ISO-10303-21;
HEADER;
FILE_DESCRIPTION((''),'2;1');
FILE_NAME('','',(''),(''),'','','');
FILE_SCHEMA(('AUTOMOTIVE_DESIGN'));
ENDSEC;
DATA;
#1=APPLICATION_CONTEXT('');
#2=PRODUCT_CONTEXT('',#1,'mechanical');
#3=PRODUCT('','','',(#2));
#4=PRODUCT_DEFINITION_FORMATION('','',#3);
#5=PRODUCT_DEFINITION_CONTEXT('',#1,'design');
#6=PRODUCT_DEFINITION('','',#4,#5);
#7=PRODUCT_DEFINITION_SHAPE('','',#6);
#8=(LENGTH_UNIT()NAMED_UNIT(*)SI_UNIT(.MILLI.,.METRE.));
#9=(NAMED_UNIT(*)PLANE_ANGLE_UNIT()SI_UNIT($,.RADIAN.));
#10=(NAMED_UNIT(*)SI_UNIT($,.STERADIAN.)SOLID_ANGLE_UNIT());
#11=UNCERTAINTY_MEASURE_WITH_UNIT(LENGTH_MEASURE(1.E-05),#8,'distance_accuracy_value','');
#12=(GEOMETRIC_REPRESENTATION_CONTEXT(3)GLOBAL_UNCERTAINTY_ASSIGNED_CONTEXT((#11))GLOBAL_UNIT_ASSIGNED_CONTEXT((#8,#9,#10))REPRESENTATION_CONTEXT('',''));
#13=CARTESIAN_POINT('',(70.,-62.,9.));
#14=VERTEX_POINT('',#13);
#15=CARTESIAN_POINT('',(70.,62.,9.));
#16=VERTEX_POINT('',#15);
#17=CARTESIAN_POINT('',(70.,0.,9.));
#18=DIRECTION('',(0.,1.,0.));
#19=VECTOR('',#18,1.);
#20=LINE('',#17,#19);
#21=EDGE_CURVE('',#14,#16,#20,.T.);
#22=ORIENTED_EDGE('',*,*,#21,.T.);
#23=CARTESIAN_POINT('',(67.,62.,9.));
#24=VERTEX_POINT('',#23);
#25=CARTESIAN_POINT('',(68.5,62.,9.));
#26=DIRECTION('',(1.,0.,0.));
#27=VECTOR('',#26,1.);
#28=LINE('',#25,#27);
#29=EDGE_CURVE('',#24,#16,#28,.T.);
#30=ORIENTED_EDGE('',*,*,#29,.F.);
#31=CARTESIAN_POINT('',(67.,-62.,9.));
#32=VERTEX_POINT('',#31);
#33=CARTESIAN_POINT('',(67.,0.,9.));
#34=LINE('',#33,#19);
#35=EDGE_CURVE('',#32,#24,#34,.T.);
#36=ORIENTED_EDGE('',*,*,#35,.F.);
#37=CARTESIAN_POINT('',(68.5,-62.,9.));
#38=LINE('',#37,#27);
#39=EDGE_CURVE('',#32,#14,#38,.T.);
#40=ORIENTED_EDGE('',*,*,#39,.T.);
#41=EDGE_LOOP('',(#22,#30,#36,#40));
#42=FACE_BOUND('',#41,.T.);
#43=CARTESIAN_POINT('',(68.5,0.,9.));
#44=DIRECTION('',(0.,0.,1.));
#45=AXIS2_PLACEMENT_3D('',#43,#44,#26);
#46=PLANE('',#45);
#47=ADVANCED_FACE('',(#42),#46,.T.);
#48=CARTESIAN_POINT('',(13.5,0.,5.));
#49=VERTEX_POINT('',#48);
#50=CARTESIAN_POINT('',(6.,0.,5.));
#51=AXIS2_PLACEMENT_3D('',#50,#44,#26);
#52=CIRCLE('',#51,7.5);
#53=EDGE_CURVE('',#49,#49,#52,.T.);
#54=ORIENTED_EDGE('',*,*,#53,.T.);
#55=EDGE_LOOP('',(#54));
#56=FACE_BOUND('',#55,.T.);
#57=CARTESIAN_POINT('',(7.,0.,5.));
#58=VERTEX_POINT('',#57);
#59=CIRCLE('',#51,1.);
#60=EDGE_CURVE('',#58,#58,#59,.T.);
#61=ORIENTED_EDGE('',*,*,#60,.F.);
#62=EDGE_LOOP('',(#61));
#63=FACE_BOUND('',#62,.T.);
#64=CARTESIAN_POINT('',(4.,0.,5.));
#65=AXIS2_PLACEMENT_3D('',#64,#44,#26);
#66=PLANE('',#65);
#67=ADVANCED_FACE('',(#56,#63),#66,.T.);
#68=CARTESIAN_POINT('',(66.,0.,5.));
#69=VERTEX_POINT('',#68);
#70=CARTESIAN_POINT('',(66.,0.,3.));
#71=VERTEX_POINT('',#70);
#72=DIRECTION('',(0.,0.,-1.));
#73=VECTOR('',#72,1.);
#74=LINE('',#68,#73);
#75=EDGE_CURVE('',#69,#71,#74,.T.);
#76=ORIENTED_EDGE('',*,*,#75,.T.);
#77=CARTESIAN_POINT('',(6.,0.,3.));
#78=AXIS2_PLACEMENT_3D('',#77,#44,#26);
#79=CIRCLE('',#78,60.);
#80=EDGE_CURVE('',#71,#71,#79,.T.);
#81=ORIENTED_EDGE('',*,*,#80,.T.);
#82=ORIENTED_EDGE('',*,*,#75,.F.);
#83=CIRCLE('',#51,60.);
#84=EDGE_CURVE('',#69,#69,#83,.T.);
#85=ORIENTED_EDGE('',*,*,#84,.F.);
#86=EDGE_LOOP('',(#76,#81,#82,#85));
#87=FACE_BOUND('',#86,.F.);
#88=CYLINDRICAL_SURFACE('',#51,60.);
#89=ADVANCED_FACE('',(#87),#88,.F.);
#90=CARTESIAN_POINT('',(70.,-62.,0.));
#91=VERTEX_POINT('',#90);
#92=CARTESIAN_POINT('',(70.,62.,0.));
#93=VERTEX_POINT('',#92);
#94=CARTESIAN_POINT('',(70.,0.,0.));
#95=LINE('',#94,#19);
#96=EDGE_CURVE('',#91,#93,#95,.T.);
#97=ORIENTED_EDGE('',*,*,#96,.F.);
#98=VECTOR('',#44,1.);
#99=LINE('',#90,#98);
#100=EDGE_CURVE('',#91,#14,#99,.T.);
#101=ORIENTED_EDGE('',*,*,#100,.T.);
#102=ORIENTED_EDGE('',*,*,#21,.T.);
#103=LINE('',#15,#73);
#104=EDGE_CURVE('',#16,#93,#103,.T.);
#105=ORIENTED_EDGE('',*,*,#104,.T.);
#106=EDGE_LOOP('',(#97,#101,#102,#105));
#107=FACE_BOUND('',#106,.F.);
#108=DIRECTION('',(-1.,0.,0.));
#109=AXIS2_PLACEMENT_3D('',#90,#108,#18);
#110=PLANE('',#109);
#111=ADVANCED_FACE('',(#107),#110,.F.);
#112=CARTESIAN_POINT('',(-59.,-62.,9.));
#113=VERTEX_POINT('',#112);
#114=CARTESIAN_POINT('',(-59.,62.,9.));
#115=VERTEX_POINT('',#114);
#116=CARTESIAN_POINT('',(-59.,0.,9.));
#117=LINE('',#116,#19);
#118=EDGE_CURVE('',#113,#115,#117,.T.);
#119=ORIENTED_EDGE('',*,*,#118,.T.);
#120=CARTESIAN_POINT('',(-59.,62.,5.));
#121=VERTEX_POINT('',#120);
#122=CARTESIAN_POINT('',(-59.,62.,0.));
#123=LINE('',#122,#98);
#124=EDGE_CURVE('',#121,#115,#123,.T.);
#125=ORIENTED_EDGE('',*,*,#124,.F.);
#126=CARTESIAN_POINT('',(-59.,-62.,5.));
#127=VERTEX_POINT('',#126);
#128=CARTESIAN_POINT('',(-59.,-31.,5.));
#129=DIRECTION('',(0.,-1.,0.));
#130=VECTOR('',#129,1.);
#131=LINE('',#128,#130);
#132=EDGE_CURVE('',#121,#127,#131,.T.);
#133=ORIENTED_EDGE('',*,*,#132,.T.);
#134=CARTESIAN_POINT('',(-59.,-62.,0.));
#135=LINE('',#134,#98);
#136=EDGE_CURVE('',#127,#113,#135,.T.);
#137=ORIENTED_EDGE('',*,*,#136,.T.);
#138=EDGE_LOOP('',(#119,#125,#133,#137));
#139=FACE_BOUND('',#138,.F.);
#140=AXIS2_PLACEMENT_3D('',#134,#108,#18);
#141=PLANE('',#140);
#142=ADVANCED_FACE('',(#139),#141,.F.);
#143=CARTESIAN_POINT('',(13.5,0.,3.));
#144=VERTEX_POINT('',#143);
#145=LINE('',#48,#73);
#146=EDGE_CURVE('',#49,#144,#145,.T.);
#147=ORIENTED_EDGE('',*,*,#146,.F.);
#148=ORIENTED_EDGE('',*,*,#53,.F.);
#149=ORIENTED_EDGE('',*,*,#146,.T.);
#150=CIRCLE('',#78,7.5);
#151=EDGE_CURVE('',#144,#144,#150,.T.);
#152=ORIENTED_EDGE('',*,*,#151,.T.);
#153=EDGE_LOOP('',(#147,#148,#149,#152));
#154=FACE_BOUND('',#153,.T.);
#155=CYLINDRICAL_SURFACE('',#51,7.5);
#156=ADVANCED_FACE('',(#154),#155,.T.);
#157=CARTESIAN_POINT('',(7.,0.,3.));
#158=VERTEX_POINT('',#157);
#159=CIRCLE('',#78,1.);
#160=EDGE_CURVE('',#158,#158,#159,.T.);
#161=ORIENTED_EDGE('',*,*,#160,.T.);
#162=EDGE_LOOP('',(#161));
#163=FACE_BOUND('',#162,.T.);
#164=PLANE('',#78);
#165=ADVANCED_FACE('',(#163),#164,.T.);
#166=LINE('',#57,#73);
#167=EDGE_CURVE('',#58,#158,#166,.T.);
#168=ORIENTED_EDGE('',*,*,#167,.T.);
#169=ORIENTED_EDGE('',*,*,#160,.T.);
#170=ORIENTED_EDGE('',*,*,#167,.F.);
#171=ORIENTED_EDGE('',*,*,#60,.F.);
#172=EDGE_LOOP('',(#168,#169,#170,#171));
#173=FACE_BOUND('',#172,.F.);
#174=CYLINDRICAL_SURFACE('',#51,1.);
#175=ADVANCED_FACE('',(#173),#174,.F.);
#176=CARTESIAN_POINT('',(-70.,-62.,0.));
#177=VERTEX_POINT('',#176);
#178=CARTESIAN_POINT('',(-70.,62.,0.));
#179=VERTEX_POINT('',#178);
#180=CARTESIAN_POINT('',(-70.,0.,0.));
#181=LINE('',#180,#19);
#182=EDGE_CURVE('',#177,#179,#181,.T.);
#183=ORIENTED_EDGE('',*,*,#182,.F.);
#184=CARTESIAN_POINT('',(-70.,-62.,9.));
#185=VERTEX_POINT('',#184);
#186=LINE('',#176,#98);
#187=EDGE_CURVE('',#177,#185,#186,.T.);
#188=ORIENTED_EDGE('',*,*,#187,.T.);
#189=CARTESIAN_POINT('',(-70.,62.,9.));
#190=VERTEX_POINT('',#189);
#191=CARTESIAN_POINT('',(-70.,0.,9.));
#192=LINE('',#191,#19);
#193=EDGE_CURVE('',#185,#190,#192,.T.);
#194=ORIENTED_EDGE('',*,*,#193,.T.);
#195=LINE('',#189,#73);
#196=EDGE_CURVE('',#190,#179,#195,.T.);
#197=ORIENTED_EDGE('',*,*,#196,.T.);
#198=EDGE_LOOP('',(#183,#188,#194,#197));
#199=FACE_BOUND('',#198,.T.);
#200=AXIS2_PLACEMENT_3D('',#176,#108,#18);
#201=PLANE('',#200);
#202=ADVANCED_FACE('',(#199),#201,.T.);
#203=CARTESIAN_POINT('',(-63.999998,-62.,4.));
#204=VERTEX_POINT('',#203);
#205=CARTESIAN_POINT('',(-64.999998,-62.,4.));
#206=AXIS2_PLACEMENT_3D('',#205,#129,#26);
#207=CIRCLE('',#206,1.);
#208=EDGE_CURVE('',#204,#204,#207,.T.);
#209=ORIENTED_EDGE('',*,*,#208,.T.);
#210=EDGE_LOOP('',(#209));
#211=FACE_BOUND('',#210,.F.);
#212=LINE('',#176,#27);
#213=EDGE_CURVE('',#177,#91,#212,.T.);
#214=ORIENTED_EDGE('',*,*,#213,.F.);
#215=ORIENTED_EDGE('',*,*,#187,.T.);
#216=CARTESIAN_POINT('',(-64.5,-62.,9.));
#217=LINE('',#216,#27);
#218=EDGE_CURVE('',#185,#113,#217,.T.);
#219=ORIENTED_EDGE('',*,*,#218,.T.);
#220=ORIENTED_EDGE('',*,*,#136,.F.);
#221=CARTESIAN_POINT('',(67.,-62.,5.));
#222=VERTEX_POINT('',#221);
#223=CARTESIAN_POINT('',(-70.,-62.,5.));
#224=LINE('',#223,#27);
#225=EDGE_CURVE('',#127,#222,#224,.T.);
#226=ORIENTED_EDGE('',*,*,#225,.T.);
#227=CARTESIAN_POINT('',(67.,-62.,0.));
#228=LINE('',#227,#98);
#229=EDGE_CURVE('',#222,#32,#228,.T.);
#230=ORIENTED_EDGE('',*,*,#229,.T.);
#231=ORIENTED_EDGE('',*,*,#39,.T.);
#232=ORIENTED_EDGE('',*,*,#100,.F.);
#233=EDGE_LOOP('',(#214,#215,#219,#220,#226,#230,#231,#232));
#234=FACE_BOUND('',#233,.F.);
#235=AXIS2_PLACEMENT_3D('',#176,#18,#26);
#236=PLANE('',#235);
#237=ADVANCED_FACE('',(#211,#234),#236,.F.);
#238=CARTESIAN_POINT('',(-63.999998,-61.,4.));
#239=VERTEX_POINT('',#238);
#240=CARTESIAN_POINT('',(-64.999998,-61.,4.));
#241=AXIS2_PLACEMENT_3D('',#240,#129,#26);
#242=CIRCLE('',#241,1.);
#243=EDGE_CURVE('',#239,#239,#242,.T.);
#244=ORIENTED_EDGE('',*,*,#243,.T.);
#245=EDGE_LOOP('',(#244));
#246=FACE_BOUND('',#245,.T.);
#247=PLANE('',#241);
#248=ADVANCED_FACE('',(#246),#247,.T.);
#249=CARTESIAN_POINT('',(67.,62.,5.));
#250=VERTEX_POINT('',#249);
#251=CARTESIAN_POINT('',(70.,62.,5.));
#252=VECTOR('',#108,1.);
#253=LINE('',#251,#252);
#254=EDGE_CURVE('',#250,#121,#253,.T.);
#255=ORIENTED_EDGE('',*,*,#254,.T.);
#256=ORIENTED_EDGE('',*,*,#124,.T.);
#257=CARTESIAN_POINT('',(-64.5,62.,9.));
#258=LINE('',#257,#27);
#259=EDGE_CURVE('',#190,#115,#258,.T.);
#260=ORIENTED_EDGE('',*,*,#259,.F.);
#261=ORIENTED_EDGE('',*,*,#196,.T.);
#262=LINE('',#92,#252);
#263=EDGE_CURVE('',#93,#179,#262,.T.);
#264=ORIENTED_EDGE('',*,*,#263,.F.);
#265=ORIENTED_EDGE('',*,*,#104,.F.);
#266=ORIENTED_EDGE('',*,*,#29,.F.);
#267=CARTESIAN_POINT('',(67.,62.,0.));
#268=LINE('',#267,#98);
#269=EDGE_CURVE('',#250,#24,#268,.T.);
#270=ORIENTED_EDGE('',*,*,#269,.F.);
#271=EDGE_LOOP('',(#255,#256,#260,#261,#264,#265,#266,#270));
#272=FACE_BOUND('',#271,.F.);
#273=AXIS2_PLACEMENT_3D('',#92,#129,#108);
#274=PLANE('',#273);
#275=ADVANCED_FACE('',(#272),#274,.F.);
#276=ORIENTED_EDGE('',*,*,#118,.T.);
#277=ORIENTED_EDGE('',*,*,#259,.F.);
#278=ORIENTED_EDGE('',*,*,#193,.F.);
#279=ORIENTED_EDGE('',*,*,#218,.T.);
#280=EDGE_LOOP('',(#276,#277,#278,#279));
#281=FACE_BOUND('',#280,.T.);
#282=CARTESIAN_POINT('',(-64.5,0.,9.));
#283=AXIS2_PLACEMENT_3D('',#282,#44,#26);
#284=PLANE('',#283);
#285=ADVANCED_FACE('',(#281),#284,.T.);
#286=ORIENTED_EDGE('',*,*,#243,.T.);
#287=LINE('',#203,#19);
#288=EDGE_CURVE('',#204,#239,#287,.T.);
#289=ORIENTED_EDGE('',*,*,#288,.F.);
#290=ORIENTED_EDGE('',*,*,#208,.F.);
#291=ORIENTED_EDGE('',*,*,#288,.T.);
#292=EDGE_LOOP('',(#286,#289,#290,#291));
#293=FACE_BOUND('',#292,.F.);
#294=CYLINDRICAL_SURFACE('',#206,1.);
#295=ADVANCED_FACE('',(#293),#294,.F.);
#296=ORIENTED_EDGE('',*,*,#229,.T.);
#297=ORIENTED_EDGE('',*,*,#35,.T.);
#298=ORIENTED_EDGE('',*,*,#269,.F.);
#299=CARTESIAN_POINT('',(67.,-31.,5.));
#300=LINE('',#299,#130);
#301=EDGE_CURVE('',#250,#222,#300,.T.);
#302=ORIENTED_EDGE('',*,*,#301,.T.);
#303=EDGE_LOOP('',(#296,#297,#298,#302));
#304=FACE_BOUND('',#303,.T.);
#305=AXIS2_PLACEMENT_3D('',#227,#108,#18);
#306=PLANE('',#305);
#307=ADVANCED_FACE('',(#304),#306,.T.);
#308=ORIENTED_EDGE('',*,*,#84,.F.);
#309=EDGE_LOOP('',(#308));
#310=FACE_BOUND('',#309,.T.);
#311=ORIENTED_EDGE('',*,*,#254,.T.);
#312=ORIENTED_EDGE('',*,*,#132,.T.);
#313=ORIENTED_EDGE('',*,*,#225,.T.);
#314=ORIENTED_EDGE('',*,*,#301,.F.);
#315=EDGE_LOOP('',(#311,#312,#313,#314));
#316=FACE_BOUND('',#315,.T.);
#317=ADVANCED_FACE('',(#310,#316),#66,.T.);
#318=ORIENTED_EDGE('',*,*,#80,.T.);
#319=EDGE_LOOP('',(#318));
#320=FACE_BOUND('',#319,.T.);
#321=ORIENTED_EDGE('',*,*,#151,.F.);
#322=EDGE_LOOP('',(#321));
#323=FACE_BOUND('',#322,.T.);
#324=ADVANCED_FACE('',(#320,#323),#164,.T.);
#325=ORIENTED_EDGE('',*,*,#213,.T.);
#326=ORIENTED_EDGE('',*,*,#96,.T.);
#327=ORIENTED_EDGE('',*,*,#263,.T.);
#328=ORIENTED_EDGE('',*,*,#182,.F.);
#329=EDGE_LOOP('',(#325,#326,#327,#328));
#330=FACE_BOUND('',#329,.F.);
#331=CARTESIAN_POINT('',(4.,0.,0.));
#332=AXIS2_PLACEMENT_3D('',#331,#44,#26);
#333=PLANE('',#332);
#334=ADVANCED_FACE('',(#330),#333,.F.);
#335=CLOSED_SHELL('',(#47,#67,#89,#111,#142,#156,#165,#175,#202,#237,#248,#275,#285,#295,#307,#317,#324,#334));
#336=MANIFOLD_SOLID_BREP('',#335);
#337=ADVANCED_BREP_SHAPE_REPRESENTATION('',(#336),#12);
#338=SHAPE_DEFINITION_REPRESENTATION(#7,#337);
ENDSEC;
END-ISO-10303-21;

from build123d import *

# Parameters (mm, degrees)
F0_W     = 126
F0_H     = 124
F0_W_2   = 11
F0_W_3   = 3
F1_DEPTH = 5
F2_DEPTH = 9
F3_R     = 60
F3_R_2   = 7.5
F4_DEPTH = 2
F5_R     = 1
F6_DEPTH = 2
F7_R     = 1
F8_DEPTH = 1


# Not quite as in the source:
# - a feature names something its author has since deleted; it is built from what else it names


with BuildPart() as f1:
    # F0 (on Top) → F1 (new body)
    with BuildSketch(Plane.XY):
        with Locations((4, 0)):
            Rectangle(F0_W, F0_H)
        with Locations((-64.5, 0)):
            Rectangle(F0_W_2, F0_H)
        with Locations((68.5, 0)):
            Rectangle(F0_W_3, F0_H)
    extrude(amount=F1_DEPTH)

    # F0 (on Top) → F2 (join)
    with BuildSketch(Plane.XY):
        with Locations((-64.5, 0)):
            Rectangle(F0_W_2, F0_H)
        with Locations((68.5, 0)):
            Rectangle(F0_W_3, F0_H)
    extrude(amount=F2_DEPTH)

    # F3 (on face) → F4 (cut)
    with BuildSketch(Plane.XY.offset(5)):
        with Locations((6.0000000522, 0)):
            Circle(F3_R)
        with Locations((6.0000000522, 0)):
            Circle(F3_R_2, mode=Mode.SUBTRACT)
    extrude(amount=-F4_DEPTH, mode=Mode.SUBTRACT)

    # F5 (on face) → F6 (cut)
    with BuildSketch(Plane.XY.offset(5)):
        with Locations((6.0000000522, 0)):
            Circle(F5_R)
    extrude(amount=-F6_DEPTH, mode=Mode.SUBTRACT)

    # F7 (on face) → F8 (cut)
    with BuildSketch(Plane.XZ.offset(62)):
        with Locations((-64.9999976158, 4)):
            Circle(F7_R)
    extrude(amount=-F8_DEPTH, mode=Mode.SUBTRACT)


solid = f1.part
